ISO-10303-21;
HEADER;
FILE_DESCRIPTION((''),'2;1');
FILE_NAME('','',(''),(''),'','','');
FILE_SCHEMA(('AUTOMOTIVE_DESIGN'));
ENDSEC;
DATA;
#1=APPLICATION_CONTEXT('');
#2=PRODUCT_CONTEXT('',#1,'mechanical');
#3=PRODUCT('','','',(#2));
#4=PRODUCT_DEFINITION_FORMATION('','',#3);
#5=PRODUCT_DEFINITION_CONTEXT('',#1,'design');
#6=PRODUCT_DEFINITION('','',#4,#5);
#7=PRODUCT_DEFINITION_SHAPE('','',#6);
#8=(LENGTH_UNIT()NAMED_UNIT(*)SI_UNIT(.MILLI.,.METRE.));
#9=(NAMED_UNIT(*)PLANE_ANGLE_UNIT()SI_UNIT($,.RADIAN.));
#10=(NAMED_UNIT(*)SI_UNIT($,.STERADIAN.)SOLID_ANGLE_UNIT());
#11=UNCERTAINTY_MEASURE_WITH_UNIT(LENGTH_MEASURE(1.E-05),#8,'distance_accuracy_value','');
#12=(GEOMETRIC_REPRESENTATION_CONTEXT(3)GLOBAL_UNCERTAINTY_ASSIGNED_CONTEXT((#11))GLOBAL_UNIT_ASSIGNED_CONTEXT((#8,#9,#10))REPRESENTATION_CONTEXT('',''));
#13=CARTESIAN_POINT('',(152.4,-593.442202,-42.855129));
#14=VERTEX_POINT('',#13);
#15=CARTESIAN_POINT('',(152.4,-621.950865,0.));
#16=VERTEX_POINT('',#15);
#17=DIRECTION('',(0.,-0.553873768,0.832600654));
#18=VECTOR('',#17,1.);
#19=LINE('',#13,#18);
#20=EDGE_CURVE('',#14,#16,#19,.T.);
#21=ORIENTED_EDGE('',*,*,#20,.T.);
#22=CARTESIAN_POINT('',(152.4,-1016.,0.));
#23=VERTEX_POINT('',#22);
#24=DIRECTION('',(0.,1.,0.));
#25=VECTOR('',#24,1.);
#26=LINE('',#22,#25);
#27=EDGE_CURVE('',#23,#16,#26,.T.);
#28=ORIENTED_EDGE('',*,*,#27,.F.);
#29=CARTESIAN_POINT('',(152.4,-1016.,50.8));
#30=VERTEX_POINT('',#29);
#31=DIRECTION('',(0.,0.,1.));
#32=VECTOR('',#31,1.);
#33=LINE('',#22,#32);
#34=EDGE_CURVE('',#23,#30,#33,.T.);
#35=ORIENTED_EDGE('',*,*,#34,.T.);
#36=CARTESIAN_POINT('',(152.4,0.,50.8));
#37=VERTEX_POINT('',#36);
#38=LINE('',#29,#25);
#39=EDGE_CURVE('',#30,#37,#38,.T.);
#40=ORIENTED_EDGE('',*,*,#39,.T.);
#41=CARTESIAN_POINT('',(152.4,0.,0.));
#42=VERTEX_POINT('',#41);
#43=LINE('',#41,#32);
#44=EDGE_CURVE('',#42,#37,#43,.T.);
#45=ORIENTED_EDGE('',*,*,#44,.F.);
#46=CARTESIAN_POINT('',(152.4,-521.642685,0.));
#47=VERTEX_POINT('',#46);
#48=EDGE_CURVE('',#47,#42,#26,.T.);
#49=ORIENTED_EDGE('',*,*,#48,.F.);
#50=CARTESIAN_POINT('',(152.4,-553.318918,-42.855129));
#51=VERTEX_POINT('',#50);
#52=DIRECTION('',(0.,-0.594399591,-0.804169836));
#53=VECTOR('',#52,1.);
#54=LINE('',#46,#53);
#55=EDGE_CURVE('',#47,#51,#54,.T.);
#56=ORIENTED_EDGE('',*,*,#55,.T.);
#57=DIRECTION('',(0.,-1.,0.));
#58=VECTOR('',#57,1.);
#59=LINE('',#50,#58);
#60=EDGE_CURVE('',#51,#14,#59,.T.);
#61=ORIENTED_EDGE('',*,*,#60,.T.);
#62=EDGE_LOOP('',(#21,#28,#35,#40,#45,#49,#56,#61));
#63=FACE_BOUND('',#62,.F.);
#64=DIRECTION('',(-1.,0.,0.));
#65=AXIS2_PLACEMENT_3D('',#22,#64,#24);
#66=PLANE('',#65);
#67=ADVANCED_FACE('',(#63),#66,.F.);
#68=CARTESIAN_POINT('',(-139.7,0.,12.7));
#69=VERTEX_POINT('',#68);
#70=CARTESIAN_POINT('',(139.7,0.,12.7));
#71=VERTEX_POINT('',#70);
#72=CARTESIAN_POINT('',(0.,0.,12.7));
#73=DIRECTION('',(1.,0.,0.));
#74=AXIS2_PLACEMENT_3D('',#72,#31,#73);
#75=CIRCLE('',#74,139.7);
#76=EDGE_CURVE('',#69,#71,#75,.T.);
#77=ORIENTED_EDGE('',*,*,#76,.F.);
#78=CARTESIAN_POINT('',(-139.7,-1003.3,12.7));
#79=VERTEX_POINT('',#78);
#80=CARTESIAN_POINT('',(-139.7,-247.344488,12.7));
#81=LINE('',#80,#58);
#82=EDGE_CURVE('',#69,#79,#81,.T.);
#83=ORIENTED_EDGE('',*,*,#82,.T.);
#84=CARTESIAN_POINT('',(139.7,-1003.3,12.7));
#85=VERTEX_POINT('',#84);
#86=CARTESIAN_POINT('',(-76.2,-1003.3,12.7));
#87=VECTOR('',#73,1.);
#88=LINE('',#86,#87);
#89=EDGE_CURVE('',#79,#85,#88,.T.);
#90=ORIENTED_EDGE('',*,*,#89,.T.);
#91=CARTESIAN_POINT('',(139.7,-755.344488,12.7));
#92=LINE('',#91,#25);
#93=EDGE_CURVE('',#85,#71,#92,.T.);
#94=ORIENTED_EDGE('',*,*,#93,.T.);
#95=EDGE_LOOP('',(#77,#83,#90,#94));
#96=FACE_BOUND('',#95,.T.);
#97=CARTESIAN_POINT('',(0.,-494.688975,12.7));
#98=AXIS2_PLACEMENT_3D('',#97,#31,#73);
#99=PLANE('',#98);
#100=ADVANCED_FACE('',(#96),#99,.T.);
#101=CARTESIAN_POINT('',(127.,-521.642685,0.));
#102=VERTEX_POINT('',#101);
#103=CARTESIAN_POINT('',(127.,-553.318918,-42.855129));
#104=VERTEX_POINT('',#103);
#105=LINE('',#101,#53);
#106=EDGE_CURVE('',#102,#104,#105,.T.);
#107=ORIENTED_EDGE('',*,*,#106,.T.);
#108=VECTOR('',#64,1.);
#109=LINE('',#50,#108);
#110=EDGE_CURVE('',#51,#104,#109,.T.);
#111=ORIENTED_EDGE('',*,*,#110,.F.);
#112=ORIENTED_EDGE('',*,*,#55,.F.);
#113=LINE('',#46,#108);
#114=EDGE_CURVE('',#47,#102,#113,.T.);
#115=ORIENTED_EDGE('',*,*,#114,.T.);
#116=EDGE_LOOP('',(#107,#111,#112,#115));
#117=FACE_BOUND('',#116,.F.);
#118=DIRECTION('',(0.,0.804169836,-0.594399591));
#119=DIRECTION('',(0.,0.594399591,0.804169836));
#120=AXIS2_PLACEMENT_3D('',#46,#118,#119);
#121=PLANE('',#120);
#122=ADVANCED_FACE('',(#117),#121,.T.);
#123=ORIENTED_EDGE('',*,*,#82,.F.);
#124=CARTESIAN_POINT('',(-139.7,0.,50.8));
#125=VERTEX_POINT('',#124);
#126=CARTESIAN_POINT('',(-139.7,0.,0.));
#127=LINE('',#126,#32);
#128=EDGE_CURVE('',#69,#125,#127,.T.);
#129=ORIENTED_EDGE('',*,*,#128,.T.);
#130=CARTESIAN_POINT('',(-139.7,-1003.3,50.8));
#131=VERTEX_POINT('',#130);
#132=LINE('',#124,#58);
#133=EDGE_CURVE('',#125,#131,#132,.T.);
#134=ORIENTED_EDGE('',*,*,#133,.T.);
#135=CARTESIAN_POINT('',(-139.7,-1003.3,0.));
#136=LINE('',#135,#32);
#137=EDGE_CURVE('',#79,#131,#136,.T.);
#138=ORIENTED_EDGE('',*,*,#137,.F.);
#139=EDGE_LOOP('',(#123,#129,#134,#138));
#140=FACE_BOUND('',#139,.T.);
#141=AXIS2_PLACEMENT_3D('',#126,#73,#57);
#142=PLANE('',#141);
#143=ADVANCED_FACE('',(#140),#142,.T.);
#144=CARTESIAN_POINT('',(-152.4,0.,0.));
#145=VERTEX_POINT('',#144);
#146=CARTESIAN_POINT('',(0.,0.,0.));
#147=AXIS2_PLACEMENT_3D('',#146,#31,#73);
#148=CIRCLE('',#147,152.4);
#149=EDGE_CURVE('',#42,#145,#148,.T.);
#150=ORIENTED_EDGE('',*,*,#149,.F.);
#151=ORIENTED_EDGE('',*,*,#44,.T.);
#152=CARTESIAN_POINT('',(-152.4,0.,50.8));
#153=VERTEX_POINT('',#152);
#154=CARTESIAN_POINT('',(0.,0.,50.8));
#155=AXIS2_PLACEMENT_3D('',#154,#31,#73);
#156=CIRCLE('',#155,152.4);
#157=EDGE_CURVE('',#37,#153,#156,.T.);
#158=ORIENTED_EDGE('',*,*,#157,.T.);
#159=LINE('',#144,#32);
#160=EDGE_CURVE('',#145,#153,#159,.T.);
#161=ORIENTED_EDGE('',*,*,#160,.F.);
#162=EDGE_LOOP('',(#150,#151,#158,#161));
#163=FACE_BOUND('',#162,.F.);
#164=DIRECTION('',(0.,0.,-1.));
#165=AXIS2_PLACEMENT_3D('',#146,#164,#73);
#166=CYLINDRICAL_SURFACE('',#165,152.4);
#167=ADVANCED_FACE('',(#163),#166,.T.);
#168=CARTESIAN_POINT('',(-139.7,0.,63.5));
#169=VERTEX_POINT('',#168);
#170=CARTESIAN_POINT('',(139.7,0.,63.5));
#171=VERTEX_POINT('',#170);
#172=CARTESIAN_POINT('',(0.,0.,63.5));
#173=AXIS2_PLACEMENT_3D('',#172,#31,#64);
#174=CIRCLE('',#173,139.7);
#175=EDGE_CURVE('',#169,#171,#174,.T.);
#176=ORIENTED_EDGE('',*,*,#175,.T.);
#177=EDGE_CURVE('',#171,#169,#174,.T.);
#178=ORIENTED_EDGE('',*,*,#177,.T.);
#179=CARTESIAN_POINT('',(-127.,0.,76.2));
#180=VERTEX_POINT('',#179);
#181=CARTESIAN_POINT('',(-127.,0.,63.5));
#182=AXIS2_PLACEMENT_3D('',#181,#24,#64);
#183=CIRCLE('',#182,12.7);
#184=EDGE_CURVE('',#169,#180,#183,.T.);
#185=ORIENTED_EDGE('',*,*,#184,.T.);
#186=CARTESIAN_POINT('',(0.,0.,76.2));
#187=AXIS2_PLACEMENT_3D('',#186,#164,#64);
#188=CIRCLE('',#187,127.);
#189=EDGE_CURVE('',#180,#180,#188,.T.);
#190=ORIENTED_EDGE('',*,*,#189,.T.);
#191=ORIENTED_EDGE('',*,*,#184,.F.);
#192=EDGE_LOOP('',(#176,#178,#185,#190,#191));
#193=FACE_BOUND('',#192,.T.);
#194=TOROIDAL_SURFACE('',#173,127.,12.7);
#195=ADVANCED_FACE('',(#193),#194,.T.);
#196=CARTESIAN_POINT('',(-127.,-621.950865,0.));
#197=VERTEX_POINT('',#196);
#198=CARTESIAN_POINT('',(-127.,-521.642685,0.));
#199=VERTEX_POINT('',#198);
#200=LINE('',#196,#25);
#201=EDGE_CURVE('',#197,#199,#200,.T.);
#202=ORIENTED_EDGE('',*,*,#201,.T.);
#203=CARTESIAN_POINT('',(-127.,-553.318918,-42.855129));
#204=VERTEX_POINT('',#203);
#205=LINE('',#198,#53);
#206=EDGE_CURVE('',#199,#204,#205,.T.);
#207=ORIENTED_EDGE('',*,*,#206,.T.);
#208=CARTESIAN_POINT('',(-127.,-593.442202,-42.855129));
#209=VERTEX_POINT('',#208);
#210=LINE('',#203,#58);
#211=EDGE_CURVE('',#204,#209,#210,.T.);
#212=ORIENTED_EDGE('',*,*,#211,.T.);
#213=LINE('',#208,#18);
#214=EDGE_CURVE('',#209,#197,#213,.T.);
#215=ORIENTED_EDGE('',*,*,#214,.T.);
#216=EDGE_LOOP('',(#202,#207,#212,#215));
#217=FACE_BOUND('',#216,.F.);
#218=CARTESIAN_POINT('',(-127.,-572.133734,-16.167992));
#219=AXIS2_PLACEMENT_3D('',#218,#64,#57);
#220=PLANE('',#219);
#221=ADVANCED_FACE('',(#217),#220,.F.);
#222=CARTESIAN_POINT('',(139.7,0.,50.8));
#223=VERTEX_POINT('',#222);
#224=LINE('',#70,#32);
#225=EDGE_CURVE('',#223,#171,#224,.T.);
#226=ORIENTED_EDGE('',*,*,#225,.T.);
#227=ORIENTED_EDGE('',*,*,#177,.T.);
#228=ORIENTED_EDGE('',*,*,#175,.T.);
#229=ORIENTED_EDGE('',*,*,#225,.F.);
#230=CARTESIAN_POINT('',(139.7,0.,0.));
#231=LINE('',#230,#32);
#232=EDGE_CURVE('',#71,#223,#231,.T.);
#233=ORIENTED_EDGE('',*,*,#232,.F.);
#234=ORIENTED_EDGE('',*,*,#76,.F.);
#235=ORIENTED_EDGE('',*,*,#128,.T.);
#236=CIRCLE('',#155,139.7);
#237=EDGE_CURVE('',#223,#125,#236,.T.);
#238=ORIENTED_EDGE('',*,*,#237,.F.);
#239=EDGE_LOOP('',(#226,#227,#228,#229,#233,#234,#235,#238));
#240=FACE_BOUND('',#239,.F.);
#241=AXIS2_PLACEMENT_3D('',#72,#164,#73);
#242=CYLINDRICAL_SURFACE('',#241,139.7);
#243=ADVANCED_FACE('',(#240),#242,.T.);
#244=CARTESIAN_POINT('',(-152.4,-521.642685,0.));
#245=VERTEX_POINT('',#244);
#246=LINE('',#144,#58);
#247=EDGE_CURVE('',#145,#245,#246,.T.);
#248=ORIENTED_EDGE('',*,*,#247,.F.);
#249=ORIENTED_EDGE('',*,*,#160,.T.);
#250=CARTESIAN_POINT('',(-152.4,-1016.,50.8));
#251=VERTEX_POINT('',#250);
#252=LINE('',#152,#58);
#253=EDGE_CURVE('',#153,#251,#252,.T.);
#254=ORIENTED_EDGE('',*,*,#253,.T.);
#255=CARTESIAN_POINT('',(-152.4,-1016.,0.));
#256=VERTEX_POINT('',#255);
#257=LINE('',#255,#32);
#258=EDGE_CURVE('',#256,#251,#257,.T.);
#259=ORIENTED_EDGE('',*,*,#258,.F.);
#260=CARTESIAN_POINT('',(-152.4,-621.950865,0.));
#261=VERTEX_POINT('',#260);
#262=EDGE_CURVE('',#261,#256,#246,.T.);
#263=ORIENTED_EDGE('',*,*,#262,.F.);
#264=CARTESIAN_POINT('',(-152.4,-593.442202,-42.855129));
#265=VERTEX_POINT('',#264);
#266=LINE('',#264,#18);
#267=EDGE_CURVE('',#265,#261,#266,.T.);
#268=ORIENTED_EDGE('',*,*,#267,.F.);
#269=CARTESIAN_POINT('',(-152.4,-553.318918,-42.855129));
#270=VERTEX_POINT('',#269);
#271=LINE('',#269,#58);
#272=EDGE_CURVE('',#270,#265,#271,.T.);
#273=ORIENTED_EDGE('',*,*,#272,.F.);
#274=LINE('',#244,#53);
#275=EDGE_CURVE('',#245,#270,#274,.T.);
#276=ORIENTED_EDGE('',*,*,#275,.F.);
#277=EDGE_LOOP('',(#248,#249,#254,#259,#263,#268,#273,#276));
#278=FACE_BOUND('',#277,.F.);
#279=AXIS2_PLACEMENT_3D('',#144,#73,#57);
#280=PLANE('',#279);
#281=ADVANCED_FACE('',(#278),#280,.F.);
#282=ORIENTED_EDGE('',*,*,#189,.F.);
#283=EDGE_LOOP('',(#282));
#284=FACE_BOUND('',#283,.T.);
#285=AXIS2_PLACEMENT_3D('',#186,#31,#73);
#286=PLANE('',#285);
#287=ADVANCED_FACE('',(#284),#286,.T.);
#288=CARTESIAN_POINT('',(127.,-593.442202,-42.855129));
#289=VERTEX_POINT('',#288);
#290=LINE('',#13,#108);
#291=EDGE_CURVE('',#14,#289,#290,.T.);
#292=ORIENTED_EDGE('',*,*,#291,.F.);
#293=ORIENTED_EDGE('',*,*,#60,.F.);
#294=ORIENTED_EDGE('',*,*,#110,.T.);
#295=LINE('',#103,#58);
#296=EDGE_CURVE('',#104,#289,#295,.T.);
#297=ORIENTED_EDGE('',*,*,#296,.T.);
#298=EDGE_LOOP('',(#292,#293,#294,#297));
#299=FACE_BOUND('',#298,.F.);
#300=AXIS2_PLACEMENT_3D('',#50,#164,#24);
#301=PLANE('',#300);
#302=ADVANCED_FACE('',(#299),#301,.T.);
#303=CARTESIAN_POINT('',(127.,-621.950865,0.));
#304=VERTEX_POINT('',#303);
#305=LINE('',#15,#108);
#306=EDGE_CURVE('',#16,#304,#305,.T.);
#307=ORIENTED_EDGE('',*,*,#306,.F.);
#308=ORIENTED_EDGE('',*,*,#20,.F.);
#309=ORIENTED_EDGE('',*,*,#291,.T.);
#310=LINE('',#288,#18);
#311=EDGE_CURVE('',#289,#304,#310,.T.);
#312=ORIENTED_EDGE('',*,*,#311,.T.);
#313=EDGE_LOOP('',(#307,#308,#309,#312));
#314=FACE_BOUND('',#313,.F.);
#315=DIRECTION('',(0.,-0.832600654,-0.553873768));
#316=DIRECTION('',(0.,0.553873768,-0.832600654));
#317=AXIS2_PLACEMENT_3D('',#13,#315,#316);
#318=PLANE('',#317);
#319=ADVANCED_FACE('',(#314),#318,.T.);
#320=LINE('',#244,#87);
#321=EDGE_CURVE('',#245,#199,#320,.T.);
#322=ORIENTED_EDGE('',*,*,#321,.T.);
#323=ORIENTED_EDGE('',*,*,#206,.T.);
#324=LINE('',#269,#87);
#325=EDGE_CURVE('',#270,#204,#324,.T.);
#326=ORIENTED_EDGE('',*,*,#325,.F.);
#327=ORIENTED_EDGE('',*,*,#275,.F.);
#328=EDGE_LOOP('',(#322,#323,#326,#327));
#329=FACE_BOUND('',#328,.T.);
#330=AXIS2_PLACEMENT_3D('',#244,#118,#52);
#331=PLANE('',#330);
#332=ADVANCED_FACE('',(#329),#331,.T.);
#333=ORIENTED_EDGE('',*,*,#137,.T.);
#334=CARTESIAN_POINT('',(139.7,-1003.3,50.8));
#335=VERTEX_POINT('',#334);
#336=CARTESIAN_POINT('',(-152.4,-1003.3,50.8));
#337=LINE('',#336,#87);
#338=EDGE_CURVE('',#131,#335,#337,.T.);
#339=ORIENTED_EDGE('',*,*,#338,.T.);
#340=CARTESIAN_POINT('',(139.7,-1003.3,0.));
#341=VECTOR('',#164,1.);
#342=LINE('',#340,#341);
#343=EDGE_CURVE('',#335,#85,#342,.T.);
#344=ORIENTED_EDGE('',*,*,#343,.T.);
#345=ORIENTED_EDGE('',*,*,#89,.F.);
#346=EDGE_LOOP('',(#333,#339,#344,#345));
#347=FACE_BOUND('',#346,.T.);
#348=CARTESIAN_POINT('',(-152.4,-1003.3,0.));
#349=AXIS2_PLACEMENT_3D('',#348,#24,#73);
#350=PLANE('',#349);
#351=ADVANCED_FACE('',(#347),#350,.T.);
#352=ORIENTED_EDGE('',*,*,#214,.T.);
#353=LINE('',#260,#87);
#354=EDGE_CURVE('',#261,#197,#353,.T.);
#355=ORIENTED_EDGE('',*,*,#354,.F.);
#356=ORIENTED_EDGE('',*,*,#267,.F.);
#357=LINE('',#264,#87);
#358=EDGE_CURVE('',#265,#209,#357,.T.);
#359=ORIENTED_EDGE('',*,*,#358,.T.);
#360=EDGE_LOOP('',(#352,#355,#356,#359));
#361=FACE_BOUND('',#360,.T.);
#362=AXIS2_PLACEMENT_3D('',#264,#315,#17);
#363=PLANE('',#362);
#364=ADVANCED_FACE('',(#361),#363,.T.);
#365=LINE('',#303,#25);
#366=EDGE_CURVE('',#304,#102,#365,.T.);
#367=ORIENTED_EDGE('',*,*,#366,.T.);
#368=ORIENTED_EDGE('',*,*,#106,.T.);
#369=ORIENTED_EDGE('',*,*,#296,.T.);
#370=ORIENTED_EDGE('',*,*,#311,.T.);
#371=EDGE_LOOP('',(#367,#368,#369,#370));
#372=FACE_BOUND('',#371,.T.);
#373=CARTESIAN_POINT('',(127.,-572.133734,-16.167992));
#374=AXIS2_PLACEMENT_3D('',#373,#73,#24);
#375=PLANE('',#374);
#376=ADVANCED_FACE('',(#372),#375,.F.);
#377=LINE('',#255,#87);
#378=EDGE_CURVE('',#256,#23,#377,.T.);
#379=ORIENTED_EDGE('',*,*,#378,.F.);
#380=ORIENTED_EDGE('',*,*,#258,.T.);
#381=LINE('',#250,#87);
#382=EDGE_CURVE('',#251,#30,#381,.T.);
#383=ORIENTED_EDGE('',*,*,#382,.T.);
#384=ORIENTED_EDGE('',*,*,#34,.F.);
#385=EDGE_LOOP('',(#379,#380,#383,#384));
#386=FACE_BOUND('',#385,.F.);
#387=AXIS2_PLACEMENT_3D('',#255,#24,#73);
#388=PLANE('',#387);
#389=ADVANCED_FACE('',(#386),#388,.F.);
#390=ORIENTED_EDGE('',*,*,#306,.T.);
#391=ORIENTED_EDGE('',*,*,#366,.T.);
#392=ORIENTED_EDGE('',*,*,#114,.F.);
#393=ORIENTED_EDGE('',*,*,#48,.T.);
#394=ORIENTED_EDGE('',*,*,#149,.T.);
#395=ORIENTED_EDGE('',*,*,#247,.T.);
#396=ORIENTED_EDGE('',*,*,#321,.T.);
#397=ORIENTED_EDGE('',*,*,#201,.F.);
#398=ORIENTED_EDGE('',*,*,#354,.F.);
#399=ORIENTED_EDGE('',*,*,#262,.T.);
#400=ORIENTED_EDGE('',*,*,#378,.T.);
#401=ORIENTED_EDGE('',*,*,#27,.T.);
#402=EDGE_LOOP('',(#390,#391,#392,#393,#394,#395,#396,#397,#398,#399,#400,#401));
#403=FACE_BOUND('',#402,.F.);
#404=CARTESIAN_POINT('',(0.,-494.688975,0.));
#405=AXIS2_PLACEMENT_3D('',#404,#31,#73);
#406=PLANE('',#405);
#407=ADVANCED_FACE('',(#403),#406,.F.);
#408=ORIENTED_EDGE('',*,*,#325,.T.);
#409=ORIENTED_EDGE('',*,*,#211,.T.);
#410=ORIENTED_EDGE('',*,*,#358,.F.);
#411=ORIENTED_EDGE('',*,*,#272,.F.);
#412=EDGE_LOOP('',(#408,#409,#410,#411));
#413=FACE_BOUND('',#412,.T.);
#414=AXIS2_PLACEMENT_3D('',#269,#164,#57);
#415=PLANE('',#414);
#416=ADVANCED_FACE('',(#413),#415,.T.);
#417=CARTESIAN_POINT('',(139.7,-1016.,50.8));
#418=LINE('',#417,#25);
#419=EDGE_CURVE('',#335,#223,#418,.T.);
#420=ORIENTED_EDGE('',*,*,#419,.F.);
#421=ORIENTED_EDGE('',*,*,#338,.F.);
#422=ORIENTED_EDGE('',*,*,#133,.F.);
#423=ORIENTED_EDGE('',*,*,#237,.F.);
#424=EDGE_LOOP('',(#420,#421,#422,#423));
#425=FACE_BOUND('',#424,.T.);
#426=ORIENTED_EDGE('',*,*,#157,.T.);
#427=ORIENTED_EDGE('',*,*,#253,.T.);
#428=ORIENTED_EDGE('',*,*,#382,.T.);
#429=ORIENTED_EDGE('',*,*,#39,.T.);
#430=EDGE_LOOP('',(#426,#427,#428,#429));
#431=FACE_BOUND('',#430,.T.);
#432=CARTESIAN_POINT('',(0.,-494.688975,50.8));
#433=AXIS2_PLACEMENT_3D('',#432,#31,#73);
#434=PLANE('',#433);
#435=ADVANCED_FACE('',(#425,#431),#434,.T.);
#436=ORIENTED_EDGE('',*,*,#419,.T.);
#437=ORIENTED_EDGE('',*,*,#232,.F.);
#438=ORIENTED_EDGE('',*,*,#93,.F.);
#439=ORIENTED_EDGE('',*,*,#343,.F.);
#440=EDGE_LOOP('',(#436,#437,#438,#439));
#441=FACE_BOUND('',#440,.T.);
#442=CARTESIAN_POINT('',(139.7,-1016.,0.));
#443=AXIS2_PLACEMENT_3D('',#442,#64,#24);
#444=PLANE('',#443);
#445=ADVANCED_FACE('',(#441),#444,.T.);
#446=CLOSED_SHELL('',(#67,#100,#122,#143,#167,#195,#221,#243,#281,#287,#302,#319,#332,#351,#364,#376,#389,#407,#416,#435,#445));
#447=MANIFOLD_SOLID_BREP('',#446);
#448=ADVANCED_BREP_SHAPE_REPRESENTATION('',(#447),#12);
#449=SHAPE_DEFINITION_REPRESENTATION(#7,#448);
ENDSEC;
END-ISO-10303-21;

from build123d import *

# Parameters (mm, degrees)
F1_DEPTH = 50.8
F2_T     = -12.7
F3_R     = 139.7
F4_DEPTH = 63.5
F7_DEPTH = 25.4


# Not quite as in the source:
# - a fillet or chamfer that OpenCascade refuses, or shapes differently, is made with other operations: its cross-section is extruded or revolved along the edge and cut away or added


with BuildPart() as f1:
    # F0 (on Top) → F1 (new body)
    with BuildSketch(Plane.XY):
        with BuildLine():
            Line((152.4, -1016), (152.4, 0))
            ThreePointArc((152.4, 0), (0, -152.4), (-152.4, 0))
            Line((-152.4, 0), (-152.4, -1016))
            Line((-152.4, -1016), (152.4, -1016))
        make_face()
        with BuildLine():
            ThreePointArc((-152.4, 0), (0, -152.4), (152.4, 0))
            Line((152.4, 0), (-152.4, 0))
        make_face()
        with BuildLine():
            Line((-152.4, 0), (152.4, 0))
            ThreePointArc((152.4, 0), (0, 152.4), (-152.4, 0))
        make_face()
    extrude(amount=F1_DEPTH)

    # F2
    f2_openings = [f1.faces().sort_by_distance(p)[0] for p in [
        (0, -447.64327, 50.8),
    ]]
    offset(amount=F2_T, openings=f2_openings)

    # F3 (on face) → F4 (join)
    with BuildSketch(Plane.XY.offset(12.7)):
        Circle(F3_R)
        with BuildLine():
            ThreePointArc((-139.7, 0), (0, -139.7), (139.7, 0))
            ThreePointArc((139.7, 0), (0, 139.7), (-139.7, 0))
        make_face()
    extrude(amount=F4_DEPTH)

    # F5: fillet of radius 12.7 on 1 edges, made by hand

    # F5_s1 → F5_t2 (revolve, cut)
    with BuildSketch(Plane.XZ):
        with BuildLine():
            ThreePointArc((-139.7, 63.5), (-135.9802561211, 72.4802561211), (-127, 76.2))
            Line((-127, 76.2), (-139.7, 76.2))
            Line((-139.7, 76.2), (-139.7, 63.5))
        make_face()
    revolve(axis=Axis((0, 0, 76.2), (0, 0, 1)), mode=Mode.SUBTRACT)

    # F6 (on face) → F7 (join)
    with BuildSketch(Plane(origin=(-152.4, 0, 0), x_dir=(0, -1, 0), z_dir=(-1, 0, 0))):
        Polygon((621.9508647919, 0), (521.6426849365, 0), (553.3189177513, -42.8551286459), (593.4422016144, -42.8551286459), align=None)
    extrude(amount=-F7_DEPTH)

    # F8: F1 across plane


with BuildPart() as f1_1:
    add(f1.part)
    add(f1.part.mirror(Plane.YZ))


solid = f1_1.part
